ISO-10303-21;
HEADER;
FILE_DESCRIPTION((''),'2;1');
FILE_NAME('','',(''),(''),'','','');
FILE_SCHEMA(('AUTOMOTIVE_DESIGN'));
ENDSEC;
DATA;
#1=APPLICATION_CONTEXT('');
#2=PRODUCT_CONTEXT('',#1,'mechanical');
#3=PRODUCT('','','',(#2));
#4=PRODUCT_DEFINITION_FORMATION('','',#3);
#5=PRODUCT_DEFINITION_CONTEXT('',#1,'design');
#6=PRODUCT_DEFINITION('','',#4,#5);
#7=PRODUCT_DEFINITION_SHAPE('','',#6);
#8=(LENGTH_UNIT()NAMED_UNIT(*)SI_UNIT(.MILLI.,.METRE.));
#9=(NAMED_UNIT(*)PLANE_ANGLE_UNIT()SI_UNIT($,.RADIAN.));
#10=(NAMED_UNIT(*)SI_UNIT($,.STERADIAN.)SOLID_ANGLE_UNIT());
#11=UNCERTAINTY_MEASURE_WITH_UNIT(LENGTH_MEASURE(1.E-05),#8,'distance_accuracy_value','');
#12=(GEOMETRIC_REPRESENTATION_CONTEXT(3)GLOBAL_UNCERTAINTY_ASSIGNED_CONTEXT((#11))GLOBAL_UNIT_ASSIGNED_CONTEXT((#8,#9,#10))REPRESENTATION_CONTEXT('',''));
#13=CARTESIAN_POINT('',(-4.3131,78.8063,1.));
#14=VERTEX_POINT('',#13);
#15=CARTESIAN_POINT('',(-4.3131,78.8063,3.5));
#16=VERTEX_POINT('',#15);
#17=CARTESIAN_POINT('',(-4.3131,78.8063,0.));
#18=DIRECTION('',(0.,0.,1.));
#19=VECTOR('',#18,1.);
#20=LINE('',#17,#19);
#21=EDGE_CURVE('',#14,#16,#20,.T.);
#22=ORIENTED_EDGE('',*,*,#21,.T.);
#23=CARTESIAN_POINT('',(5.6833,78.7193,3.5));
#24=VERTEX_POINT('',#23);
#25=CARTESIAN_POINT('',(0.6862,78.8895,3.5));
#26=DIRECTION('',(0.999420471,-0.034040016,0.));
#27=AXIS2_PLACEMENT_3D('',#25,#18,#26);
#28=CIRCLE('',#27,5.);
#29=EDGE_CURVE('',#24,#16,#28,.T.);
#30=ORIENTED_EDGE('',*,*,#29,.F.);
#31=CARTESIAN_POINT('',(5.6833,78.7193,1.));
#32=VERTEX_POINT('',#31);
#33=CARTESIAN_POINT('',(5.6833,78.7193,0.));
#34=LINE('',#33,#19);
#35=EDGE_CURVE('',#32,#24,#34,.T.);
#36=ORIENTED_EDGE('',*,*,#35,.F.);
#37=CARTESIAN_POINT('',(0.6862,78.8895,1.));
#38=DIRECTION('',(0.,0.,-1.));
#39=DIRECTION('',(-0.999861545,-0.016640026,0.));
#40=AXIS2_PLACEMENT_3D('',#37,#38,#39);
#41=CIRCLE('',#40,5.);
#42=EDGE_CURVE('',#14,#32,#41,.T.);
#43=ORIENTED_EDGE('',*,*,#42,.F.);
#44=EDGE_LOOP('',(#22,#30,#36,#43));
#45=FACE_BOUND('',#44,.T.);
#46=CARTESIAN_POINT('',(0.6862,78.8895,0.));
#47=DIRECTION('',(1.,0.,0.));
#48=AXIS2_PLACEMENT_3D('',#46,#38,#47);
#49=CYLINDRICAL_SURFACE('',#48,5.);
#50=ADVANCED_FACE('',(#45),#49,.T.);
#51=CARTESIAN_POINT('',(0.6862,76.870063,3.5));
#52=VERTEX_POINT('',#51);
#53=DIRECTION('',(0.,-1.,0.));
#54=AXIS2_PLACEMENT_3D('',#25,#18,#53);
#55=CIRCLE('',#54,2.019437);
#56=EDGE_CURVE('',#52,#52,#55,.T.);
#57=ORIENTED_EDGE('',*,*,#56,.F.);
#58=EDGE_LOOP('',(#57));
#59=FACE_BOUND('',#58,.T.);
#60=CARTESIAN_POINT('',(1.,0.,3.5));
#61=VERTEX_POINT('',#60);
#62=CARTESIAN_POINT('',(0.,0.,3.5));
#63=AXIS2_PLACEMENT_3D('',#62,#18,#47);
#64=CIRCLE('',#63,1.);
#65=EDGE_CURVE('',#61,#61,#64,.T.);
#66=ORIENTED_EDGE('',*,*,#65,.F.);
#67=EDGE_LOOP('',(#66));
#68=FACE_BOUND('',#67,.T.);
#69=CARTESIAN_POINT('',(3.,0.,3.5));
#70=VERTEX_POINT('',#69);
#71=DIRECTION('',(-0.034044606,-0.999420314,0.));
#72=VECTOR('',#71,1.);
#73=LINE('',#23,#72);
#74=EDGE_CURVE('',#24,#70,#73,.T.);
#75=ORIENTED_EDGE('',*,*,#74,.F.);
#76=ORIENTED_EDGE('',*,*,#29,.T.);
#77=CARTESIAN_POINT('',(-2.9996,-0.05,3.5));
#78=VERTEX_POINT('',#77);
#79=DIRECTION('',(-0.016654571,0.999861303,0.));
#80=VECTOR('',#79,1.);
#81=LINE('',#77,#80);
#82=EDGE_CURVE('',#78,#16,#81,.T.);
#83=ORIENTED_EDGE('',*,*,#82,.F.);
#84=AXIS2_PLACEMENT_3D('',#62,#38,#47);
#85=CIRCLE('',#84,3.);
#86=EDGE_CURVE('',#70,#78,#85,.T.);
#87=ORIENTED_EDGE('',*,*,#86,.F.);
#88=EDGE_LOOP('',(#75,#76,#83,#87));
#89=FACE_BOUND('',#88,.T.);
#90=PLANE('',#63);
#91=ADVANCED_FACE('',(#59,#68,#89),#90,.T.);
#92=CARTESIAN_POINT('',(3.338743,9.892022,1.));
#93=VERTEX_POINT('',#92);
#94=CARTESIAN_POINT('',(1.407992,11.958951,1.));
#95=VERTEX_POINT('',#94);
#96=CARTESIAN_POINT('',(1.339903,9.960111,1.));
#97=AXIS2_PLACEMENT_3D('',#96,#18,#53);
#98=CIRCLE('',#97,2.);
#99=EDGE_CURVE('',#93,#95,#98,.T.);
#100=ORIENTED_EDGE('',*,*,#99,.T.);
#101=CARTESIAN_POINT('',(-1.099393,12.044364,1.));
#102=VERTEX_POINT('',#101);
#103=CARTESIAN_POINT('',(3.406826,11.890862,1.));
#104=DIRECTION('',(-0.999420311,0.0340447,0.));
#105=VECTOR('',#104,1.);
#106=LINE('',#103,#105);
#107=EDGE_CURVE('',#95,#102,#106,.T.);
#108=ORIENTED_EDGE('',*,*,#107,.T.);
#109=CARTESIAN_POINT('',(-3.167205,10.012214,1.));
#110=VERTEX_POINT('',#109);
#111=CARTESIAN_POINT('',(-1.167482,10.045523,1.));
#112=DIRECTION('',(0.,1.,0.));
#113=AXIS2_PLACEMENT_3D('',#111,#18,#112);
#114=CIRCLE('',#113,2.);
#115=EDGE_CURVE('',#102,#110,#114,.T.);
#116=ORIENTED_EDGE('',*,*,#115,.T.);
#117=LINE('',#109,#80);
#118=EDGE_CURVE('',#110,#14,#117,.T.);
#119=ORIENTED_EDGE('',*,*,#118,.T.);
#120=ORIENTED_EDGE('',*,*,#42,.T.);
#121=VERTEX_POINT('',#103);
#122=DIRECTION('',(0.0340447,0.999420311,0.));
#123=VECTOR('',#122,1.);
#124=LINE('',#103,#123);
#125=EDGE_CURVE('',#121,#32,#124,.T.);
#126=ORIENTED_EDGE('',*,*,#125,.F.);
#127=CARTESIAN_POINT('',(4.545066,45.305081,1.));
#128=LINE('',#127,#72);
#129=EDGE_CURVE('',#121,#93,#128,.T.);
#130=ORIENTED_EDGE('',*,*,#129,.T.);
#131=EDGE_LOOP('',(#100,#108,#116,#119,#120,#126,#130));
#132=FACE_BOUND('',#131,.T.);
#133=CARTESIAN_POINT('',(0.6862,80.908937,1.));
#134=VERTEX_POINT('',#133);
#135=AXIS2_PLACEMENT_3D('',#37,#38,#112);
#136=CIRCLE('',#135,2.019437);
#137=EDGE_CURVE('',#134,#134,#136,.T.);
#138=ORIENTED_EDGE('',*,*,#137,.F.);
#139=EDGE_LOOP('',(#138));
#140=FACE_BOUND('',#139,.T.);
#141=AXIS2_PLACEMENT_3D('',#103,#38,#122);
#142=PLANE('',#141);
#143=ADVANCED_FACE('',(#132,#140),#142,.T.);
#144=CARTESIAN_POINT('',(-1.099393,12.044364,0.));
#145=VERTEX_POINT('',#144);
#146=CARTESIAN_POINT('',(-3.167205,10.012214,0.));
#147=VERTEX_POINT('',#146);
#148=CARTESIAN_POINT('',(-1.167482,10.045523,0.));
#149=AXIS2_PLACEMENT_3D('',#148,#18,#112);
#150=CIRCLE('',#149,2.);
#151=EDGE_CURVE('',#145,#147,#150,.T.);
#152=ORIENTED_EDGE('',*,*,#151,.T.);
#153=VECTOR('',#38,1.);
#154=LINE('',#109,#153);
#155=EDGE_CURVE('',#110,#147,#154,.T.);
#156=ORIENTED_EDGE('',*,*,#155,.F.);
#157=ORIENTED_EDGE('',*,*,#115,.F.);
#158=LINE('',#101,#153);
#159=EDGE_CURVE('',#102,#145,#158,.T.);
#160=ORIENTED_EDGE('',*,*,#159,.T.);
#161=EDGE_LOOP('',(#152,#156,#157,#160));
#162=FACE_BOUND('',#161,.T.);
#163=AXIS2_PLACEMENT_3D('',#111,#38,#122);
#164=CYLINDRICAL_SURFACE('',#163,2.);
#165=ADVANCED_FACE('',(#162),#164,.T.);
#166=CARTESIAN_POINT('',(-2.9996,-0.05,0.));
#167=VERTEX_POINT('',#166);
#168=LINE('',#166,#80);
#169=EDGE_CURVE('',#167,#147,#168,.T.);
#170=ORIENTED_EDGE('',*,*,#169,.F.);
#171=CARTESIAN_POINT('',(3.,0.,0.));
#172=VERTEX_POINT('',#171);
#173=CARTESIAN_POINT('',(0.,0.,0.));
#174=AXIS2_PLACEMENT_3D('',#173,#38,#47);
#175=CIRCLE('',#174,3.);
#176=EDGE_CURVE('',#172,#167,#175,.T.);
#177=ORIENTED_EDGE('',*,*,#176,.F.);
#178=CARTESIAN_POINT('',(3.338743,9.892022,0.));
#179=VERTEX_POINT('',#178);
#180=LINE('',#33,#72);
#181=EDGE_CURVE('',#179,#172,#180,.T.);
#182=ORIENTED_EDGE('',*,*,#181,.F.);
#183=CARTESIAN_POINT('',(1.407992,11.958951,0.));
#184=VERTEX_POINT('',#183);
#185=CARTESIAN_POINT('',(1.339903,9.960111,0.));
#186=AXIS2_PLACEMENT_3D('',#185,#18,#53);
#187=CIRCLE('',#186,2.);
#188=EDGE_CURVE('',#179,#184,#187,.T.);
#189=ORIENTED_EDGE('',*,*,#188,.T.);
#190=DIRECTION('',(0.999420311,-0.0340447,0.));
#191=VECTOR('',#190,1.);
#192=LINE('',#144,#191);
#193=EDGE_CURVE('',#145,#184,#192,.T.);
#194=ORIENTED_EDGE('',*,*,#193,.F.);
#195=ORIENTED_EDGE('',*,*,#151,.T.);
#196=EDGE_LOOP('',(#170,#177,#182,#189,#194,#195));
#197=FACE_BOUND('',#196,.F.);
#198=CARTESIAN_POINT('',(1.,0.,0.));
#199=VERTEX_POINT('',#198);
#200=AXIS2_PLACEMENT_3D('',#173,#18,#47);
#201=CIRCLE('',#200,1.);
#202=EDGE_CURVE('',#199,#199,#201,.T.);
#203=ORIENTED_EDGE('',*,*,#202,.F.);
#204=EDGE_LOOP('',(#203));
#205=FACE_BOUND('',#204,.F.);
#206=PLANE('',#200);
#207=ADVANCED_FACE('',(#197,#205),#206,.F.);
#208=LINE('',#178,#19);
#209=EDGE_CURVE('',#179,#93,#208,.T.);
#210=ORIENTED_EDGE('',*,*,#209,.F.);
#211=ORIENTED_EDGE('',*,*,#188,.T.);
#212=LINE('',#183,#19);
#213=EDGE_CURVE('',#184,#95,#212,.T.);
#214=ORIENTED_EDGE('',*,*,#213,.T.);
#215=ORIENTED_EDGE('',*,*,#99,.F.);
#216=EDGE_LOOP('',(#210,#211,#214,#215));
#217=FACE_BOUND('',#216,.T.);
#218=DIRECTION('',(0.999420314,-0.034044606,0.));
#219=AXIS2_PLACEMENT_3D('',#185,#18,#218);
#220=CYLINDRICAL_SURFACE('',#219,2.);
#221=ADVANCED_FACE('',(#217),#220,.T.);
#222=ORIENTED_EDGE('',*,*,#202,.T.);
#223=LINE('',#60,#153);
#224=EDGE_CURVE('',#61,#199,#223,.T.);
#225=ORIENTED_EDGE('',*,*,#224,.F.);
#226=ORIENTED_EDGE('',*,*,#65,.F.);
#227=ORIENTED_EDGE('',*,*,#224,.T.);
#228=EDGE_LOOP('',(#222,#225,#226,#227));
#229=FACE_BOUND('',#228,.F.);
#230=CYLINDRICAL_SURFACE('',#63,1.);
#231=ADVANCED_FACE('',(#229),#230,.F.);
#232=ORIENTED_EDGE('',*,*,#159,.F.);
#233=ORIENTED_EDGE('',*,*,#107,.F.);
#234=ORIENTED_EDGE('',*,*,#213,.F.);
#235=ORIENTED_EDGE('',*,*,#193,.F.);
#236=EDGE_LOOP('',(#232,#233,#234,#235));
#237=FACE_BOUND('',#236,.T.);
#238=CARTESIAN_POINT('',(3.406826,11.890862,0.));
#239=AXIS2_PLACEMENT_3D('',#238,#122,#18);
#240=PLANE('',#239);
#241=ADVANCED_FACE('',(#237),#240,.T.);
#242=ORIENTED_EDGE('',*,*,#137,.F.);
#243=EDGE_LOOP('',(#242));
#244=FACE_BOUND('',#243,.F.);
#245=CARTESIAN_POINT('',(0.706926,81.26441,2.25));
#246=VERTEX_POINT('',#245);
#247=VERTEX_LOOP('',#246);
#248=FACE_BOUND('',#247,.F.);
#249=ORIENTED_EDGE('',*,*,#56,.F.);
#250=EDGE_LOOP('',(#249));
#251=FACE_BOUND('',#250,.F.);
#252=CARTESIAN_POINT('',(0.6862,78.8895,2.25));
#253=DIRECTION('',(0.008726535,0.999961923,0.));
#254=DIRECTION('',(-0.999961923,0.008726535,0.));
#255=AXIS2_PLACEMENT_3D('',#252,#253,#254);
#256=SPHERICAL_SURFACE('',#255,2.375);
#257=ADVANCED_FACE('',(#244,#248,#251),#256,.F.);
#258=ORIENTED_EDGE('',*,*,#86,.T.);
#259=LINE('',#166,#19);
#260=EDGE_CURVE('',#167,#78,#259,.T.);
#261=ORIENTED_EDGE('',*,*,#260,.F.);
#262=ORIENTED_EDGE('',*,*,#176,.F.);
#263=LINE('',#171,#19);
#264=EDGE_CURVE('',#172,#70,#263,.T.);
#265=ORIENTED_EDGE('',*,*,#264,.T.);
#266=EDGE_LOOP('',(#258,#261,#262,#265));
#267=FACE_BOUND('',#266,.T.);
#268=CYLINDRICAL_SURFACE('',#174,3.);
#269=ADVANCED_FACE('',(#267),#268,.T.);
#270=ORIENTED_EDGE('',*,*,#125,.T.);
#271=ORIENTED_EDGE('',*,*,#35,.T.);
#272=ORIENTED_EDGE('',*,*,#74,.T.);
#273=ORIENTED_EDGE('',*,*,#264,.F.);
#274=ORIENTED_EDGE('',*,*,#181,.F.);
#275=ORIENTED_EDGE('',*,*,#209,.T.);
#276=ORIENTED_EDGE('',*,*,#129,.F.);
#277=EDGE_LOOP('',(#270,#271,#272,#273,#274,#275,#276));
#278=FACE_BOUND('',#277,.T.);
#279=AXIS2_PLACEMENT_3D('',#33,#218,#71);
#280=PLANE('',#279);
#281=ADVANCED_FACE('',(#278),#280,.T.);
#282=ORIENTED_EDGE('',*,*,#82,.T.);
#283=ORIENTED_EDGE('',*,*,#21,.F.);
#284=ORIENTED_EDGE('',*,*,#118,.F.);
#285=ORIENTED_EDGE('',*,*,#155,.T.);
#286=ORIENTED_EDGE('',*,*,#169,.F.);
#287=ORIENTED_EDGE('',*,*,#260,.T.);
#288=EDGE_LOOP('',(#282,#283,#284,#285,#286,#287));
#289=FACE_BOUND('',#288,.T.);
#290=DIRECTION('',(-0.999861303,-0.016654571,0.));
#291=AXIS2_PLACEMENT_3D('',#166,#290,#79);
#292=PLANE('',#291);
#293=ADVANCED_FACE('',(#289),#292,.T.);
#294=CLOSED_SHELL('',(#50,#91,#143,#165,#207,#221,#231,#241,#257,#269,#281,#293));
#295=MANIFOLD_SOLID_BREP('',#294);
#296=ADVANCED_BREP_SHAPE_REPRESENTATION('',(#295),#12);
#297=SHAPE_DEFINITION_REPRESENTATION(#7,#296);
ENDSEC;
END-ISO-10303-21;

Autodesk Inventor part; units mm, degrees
ref_plane "YZ Plane" through (0, 0, 0) normal (1, 0, 0) x (0, 1, 0)
ref_plane "XZ Plane" through (0, 0, 0) normal (0, 1, 0) x (-1, 0, 0)
ref_plane "XY Plane" through (0, 0, 0) normal (0, 0, 1) x (1, 0, 0)
sketch "Sketch1" plane through (0, 0, 0) normal (0, 0, 1) x (1, 0, 0)
  circle A0 centre (0, 0) radius 0.5
  spline S0 degree 3 poles (0.2195, 78.8895) (0.2199, 78.9523) (0.2329, 79.0192) (0.2847, 79.142) (0.3236, 79.198) (0.413, 79.2862) (0.4694, 79.3243) (0.5929, 79.3745) (0.66, 79.3866) (0.7856, 79.3858) (0.8524, 79.3728) (0.9753, 79.321) (1.0313, 79.2822) (1.1195, 79.1928) (1.1576, 79.1363) (1.2078, 79.0128) (1.2199, 78.9458) (1.2191, 78.8202) (1.2061, 78.7533) (1.1543, 78.6305) (1.1154, 78.5745) (1.0261, 78.4863) (0.9696, 78.4482) (0.8461, 78.398) (0.779, 78.3858) (0.6535, 78.3867) (0.5866, 78.3996) (0.4637, 78.4515) (0.4078, 78.4903) (0.3196, 78.5797) (0.2815, 78.6362) (0.2312, 78.7597) (0.2191, 78.8267) (0.2195, 78.8895) knots 0 0 0 0 0.0625 0.0625 0.125 0.125 0.1875 0.1875 0.25 0.25 0.3125 0.3125 0.375 0.375 0.4375 0.4375 0.5 0.5 0.5625 0.5625 0.625 0.625 0.6875 0.6875 0.75 0.75 0.8125 0.8125 0.875 0.875 0.9375 0.9375 1 1 1 1
  line L0 (0.6862, 78.8895) -> (0, 0)
  circle A1 centre (0, 0) radius 3
  circle A2 centre (0.6862, 78.8895) radius 5
  line L1 (5.6833, 78.7193) -> (2.9983, -0.1021)
  line L2 (-2.9996, -0.05) -> (-4.3131, 78.8063)
  circle A3 centre (0, 0) radius 0.75
  point P0 (0, 0)
  point P1 (0.2195, 78.8895)
  dimension "d0" = 6
  dimension "d1" = 10
  dimension "d12" = 1.5
extrude "Extrusion1" add sketch "Sketch1" along normal blind 3.5 contours A2 L1 A1 L0 | L0 A1 L2 A2 | A2 | A1 | A3
sketch "Sketch2" plane through (5.6833, 78.7193, 3.5) normal (0.9994203, -0.0340447, 0) x (0, 0, -1)
  line L0 (3.5, -66.8672) -> (2.5, -66.8672)
  line L1 (2.5, -66.8672) -> (2.5, 7.5211)
  line L2 (2.5, 7.5211) -> (3.5, 7.5211)
  line L3 (3.5, 7.5211) -> (3.5, -66.8672)
  line L4 (3.5, -81.8672) -> (0, -81.8672) projected
  line L5 (3.5, -78.8672) -> (3.5, 0) projected
  dimension "d4" = 1
  dimension "d5" = 15
extrude "Extrusion2" cut sketch "Sketch2" against normal through all
fillet "Fillet1" radius 2 2 edges at (3.4068, 11.8909, 0.5) (-3.2022, 12.116, 0.5)
ref_plane "Work Plane1" through (0.6862, 78.8895, 2.25) normal (0, 0, -1) x (-0.9999622, 0.0086975, 0)
sketch "Sketch3" plane through (0.6862, 78.8895, 2.25) normal (0, 0, -1) x (-0.9999622, 0.0086975, 0)
  arc A0 (0, -2.375) -> (0, 2.375) centre (0, 0) ccw
  line L0 (0, 2.375) -> (0, -2.375)
  point P0 (0, -78.8925)
  dimension "d10" = 4.75
revolve "Revolution1" cut sketch "Sketch3" angle 360 about axis through (0.7068, 81.2645, 2.25) along (-0.0086975, -0.9999622, 0)
sketch "Sketch4" plane through (0, 0, 3.5) normal (0, 0, 1) x (1, 0, 0)
  circle A0 centre (0, 0) radius 0.5 projected
  circle A1 centre (0, 0) radius 1
  point P0 (0, 0)
  dimension "d13" = 2
extrude "Extrusion3" cut sketch "Sketch4" against normal through all
properties part number "RightArm"
